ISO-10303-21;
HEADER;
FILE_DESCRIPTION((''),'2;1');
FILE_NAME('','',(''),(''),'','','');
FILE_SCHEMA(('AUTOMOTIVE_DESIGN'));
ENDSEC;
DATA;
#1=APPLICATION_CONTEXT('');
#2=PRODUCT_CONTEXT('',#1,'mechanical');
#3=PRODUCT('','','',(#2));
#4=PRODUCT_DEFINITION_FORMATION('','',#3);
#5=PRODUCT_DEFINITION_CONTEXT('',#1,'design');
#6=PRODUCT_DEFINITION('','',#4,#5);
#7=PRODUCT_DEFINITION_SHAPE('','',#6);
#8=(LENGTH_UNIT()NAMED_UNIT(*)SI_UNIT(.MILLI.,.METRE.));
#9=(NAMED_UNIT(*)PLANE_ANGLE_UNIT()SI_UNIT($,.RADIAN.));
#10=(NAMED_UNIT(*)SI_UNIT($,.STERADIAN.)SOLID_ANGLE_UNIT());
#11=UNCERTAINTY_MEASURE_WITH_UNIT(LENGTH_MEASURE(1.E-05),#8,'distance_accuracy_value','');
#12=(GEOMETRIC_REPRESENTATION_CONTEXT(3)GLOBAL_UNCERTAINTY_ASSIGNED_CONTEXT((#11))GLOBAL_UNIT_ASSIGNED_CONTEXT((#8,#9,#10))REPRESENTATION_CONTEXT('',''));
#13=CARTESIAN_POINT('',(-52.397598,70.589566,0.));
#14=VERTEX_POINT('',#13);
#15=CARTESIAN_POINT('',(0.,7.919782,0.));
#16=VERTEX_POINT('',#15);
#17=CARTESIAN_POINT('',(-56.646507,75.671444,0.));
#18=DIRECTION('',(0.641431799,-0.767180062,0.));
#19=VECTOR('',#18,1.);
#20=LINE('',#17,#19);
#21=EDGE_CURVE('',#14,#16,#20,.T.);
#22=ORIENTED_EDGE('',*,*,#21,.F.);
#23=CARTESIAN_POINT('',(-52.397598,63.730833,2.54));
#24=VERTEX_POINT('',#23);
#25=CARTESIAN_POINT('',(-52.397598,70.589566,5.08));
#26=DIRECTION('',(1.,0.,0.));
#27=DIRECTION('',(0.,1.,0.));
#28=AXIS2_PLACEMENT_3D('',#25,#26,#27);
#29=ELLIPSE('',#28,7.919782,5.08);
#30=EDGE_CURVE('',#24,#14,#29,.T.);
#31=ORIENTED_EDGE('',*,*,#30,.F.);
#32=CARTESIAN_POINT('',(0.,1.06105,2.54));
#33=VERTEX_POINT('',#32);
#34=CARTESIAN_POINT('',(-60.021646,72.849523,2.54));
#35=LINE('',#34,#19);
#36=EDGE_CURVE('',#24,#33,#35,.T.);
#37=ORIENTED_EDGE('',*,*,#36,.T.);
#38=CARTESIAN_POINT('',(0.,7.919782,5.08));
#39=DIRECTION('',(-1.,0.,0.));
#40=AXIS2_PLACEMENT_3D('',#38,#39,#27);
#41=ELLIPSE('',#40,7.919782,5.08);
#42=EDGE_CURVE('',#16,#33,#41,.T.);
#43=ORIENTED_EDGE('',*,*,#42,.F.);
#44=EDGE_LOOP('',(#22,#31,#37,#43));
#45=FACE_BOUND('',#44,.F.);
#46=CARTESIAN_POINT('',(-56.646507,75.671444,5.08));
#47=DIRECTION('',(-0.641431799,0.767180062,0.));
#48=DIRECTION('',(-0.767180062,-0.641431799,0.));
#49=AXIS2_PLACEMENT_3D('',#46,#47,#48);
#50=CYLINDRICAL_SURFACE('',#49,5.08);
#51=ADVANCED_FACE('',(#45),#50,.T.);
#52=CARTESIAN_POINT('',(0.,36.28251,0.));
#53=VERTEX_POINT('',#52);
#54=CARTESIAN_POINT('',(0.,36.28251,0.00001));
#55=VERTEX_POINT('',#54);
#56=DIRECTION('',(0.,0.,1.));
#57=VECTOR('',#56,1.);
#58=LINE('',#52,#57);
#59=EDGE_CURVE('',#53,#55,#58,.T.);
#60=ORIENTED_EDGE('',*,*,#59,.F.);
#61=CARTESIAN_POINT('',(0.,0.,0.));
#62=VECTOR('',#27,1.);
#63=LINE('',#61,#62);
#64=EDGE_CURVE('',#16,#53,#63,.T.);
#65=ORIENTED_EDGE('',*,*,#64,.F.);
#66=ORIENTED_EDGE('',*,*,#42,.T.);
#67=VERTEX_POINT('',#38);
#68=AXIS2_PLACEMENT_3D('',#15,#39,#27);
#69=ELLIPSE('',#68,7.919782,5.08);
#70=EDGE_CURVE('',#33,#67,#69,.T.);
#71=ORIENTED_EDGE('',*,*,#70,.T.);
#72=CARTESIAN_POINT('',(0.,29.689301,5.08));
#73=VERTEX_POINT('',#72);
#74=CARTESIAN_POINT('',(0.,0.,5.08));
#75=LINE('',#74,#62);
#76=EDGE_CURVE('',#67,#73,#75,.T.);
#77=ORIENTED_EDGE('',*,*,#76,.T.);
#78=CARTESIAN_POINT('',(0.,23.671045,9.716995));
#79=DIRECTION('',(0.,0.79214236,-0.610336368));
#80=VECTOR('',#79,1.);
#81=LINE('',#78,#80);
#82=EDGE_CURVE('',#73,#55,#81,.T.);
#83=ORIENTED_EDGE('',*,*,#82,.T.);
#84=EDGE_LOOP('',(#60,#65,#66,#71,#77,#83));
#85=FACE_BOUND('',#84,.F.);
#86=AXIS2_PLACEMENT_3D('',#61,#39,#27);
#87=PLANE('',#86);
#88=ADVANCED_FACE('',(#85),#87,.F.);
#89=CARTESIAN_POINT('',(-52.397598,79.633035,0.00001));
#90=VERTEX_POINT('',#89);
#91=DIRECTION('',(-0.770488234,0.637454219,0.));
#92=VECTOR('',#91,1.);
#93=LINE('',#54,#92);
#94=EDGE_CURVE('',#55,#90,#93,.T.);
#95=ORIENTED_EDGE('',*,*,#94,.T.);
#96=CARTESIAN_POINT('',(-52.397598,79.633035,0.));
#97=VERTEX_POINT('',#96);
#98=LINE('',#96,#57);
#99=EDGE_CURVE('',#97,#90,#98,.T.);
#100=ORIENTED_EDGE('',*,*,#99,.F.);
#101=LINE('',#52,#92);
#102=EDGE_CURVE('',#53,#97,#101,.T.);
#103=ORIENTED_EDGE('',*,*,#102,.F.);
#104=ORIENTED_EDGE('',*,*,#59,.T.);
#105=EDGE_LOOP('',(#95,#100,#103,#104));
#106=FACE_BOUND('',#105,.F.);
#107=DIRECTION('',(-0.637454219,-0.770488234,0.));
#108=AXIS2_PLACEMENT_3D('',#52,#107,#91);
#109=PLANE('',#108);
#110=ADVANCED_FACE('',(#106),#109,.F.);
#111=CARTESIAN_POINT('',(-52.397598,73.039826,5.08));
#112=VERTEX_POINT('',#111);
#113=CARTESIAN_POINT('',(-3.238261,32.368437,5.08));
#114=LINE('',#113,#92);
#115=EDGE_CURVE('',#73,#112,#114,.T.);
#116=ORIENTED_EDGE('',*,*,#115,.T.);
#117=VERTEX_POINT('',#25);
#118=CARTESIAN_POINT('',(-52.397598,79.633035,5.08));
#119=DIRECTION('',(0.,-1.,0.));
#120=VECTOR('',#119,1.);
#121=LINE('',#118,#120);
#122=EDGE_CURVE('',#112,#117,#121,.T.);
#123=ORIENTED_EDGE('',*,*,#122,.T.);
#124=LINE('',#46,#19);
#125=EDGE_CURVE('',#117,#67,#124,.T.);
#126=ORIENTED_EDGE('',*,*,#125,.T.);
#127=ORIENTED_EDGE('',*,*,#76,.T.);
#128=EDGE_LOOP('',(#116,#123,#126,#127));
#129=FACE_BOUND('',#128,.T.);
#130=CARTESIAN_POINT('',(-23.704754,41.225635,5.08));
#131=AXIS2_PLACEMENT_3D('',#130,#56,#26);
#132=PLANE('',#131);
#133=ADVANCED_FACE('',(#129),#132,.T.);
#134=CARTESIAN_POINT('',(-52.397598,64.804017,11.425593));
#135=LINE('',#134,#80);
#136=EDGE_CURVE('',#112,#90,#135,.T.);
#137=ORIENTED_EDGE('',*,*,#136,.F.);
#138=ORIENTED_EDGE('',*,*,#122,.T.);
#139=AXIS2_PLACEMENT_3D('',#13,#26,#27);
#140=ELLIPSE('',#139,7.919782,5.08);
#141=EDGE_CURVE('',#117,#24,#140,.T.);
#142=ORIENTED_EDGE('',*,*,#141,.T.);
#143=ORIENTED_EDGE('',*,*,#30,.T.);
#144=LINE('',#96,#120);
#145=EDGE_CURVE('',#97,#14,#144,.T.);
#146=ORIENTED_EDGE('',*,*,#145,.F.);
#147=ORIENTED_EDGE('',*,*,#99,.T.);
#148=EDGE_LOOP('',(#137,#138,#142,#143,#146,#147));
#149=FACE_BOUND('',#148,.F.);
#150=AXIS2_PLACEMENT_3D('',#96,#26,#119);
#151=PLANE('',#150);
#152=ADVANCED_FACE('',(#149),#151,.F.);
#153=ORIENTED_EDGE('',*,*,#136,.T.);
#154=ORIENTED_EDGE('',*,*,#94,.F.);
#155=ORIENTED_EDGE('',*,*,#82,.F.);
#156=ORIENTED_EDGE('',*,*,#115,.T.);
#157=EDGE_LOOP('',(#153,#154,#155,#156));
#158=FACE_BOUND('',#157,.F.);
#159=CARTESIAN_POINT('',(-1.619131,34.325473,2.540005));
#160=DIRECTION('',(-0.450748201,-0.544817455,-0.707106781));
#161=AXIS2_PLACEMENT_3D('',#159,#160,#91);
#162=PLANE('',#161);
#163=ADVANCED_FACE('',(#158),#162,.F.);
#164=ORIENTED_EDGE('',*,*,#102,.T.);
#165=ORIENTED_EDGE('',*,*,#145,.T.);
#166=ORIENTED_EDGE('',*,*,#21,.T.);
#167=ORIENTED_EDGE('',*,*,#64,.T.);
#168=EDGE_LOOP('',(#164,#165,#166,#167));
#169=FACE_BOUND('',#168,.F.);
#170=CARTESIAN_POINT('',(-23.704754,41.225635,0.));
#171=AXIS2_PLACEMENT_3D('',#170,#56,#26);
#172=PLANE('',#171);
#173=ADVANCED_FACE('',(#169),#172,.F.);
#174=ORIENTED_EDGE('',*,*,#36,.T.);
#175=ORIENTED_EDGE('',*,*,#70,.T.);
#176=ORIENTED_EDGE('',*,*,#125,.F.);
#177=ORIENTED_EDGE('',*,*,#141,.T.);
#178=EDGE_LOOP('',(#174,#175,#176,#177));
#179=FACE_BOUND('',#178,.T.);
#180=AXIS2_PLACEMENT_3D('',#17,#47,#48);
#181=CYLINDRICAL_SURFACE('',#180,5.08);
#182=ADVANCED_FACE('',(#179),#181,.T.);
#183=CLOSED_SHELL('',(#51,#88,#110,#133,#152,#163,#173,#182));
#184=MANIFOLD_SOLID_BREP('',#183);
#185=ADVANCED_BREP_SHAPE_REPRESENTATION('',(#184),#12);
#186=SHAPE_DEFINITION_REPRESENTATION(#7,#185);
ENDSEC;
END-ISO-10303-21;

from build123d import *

# Parameters (mm, degrees)
F1_DEPTH    = 5.08
F2_T1_DEPTH = 107.0884939123
F3_SIZE     = 5.07999


# Not quite as in the source:
# - a fillet or chamfer that OpenCascade refuses, or shapes differently, is made with other operations: its cross-section is extruded or revolved along the edge and cut away or added
# - a fillet or chamfer is up to 0.001 mm smaller than in the source, because OpenCascade refuses the exact size


with BuildPart() as f1:
    # F0 (on Top) → F1 (new body)
    with BuildSketch(Plane.XY):
        Polygon((-52.3975975811, 62.6697838306), (0, 0), (0, 36.2825095654), (-52.3975975811, 79.6330347657), align=None)
    extrude(amount=F1_DEPTH)

    # F2: fillet of radius 5.08 on 2 edges, made by hand

    # F2_s2 → F2_t1 (cut)
    with BuildSketch(Plane(origin=(-60.5437814243, 72.412970619, 0), x_dir=(0, 0, 1), z_dir=(0.6414317987, -0.7671800621, 0))):
        with BuildLine():
            ThreePointArc((0, 0), (3.5921024484, -1.4878975516), (5.08, -5.08))
            Line((5.08, -5.08), (5.08, 0))
            Line((5.08, 0), (0, 0))
        make_face()
        with BuildLine():
            ThreePointArc((5.08, 0), (1.4878975516, -1.4878975516), (0, -5.08))
            Line((0, -5.08), (0, 0))
            Line((0, 0), (5.08, 0))
        make_face()
    extrude(amount=F2_T1_DEPTH, mode=Mode.SUBTRACT)

    # F3 (size 5.08 in the source; OpenCascade refuses exactly that, so slightly less here)
    f3_edges = [f1.edges().sort_by_distance(p)[0] for p in [
        (-26.198799, 57.957772, 5.08),
    ]]
    chamfer(f3_edges, length=F3_SIZE)


solid = f1.part
